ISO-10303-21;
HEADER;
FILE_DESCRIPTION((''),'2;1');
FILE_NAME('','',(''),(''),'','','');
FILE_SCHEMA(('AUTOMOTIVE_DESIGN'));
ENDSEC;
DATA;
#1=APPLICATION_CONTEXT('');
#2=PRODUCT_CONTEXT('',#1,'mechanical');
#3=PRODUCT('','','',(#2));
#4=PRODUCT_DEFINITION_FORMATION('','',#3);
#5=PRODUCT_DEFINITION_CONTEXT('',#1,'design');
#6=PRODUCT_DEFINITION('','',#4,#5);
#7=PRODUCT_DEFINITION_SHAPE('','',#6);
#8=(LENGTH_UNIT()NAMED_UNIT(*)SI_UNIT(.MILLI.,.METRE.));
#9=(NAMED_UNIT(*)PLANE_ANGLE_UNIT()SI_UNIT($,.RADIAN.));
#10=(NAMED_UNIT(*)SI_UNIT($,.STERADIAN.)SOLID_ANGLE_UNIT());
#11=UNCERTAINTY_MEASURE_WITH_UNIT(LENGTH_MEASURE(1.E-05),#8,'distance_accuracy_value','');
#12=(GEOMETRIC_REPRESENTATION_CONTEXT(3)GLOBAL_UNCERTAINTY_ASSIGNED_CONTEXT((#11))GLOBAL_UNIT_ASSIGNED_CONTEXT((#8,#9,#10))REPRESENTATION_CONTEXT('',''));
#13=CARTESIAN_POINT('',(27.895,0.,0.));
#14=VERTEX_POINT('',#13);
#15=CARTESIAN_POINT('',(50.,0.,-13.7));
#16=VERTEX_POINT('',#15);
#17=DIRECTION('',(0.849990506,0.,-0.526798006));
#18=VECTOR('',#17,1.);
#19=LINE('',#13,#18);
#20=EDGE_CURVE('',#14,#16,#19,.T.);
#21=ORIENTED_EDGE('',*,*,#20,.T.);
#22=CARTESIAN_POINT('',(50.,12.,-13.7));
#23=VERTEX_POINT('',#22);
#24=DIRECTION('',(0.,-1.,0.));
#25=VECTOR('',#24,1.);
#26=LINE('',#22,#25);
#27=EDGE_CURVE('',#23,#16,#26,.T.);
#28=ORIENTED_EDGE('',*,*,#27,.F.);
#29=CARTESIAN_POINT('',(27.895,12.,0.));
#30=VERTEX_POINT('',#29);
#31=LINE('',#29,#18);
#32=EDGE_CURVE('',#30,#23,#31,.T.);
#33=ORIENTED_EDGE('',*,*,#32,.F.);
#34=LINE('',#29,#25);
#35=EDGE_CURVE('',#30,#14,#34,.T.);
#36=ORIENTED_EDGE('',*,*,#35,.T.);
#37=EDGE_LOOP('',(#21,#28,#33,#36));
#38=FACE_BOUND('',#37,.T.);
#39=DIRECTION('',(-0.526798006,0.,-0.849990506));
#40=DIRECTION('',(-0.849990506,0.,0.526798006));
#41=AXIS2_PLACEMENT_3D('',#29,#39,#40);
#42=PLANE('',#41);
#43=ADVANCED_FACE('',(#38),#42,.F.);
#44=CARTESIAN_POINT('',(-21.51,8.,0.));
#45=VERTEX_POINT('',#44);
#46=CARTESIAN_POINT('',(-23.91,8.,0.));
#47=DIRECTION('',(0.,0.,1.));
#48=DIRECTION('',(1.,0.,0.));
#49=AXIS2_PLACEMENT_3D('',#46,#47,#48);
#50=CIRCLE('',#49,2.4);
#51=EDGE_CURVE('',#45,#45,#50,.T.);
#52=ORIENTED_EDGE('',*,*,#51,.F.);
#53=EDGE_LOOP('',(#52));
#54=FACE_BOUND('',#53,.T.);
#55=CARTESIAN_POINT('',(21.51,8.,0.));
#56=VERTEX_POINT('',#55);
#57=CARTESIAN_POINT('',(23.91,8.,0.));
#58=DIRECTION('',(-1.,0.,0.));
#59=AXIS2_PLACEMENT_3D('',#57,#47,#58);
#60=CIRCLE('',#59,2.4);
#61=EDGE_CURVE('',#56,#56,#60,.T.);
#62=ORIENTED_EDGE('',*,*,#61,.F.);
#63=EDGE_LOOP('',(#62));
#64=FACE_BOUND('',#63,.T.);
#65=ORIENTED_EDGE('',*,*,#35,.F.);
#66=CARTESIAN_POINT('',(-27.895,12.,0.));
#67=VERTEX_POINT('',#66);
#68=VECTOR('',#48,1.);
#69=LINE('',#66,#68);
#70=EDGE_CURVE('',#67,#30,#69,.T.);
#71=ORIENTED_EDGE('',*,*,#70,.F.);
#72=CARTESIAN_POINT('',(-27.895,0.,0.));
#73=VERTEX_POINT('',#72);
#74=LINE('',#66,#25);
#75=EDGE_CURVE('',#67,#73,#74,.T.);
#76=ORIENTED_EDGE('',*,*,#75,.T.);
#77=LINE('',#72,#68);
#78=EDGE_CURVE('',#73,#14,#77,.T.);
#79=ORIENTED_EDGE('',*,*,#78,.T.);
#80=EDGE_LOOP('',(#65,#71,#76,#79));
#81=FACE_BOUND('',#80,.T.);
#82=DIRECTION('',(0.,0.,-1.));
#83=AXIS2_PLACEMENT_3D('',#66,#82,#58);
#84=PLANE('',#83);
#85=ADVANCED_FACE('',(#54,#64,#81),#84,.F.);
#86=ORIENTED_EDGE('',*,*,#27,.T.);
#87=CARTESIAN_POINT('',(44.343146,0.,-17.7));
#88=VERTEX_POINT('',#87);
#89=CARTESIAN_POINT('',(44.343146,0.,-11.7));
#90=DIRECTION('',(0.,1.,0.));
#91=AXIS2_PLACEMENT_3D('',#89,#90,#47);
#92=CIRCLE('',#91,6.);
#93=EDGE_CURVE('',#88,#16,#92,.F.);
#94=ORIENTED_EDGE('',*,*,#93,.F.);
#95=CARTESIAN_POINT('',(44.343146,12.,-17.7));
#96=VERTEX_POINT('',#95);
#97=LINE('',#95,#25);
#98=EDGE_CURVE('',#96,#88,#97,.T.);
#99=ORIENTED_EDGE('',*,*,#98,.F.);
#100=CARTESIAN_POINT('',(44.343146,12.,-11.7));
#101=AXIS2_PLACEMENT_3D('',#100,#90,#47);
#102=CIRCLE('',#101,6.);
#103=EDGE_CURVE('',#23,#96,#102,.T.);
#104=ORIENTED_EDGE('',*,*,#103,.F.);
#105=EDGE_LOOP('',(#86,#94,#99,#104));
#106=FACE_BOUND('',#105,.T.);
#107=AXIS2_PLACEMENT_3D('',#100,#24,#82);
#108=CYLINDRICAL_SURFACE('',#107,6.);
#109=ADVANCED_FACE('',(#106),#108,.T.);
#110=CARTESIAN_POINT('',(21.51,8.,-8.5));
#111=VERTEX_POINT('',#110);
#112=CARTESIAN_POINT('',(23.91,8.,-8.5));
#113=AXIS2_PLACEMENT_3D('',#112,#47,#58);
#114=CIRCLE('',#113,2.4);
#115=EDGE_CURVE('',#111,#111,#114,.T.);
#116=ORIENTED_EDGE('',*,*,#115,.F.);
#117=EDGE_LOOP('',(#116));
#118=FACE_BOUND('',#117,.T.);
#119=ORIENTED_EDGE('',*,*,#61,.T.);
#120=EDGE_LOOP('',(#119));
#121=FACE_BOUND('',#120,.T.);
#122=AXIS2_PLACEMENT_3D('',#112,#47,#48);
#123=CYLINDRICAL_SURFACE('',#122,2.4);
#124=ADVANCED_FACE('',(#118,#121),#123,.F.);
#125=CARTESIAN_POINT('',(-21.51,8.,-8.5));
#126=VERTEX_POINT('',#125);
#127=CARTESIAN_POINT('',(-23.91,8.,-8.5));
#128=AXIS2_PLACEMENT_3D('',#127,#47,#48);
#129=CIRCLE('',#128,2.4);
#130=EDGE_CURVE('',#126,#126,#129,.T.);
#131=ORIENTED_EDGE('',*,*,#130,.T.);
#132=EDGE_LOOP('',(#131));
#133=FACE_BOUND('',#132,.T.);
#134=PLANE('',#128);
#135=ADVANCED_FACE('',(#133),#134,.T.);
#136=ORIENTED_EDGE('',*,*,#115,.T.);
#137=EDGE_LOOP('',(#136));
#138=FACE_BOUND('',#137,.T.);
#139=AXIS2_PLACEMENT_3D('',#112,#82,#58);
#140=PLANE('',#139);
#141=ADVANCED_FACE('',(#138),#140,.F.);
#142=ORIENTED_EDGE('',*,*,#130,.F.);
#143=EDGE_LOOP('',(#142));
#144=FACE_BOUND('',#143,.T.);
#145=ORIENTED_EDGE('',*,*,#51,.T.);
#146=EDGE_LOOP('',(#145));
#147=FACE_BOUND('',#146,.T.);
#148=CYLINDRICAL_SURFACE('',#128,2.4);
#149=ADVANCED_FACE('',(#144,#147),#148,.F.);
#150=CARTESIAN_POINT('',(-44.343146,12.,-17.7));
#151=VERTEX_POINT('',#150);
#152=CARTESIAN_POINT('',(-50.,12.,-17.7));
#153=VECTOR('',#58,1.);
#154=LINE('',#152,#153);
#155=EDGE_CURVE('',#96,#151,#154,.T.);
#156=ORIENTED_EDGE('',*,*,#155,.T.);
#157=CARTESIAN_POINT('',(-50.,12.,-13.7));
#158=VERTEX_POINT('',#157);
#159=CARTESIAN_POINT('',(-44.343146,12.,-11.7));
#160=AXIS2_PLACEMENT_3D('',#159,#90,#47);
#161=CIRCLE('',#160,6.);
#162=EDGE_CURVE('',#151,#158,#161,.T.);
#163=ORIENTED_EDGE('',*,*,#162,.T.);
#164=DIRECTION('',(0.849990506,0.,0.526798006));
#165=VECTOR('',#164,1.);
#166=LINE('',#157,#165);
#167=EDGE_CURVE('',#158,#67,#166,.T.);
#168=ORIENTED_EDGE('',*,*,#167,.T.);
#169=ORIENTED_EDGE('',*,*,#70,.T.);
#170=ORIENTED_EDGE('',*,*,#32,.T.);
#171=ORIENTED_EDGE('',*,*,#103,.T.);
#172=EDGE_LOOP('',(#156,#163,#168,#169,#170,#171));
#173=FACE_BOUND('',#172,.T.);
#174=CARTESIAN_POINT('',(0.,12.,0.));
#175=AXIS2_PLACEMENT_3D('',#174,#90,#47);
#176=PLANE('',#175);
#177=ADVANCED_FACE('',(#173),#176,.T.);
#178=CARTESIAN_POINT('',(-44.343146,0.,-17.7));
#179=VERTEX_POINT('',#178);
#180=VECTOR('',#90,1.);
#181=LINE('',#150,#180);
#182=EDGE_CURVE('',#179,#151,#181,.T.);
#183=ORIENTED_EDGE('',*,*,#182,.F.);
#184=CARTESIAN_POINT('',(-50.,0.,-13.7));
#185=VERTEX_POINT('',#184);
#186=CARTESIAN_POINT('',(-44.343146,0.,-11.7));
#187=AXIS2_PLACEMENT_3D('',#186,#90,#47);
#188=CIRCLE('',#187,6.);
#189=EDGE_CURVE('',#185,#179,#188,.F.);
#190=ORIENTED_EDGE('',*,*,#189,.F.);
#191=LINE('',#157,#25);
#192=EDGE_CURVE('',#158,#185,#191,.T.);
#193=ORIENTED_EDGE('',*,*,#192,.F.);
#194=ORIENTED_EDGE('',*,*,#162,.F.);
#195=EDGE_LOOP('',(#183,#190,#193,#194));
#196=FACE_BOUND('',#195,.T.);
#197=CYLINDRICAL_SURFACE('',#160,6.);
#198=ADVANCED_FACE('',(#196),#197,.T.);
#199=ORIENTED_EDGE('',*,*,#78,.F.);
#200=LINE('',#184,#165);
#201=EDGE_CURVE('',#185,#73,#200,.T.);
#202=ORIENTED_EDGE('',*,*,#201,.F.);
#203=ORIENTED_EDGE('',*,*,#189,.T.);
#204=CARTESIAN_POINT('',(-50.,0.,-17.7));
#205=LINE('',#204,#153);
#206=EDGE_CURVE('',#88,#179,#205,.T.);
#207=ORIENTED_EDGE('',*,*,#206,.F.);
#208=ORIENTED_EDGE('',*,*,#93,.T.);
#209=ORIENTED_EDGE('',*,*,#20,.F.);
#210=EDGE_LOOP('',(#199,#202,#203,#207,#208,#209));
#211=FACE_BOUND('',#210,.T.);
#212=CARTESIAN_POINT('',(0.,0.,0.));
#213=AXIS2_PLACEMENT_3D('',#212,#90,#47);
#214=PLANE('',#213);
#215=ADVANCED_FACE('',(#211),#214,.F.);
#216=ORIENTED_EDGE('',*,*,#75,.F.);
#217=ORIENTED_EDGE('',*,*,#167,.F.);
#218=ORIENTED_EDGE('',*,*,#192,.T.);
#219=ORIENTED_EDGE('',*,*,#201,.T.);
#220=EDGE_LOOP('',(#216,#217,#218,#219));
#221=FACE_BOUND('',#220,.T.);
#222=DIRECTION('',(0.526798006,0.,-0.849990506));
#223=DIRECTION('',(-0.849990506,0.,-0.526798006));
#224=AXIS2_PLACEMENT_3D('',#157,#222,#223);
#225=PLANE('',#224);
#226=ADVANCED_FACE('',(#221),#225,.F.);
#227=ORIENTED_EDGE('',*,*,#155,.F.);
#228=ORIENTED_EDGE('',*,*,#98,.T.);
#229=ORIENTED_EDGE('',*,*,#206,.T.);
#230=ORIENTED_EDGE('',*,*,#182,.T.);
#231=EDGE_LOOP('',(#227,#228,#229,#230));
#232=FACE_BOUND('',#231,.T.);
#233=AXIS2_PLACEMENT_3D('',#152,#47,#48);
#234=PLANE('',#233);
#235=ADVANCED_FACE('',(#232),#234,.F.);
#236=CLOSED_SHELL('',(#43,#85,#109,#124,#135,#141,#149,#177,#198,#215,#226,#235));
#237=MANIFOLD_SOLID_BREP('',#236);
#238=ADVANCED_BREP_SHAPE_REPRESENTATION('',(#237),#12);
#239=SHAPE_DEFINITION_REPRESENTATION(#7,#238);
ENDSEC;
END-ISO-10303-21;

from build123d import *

# Parameters (mm, degrees)
BOSS_EXTRUDE1_DEPTH = 12
SKETCH3_R           = 2.4
CUT_EXTRUDE1_DEPTH  = 8.5
FILLET1_R           = 6


with BuildPart() as part:
    # Sketch1 → Boss-Extrude1 (new body)
    with BuildSketch(Plane(origin=(0, 0, 0), x_dir=(1, 0, 0), z_dir=(0, 1, 0))):
        Polygon((-50, 17.7), (50, 17.7), (50, 13.7), (27.895, 0), (-27.895, 0), (-50, 13.7), align=None)
    extrude(amount=BOSS_EXTRUDE1_DEPTH)

    # Sketch3 → Cut-Extrude1 (cut)
    with BuildSketch(Plane.XY):
        with Locations((-23.91, 8)):
            Circle(SKETCH3_R)
        with Locations(Location((23.91, 8, 0), (0, 0, 180))):
            Circle(SKETCH3_R)
    extrude(amount=-CUT_EXTRUDE1_DEPTH, mode=Mode.SUBTRACT)

    # Fillet1
    # the kernel refuses this fillet: 6 mm, written as the material it takes off along each edge
    with BuildSketch(Plane(origin=(50, -14.142135624, -17.7), x_dir=(-1, 0, 0), z_dir=(0, 1, 0))) as fillet1_piece_1:
        with BuildLine():
            CenterArc((5.656854249, 6), FILLET1_R, 199.471220634, 70.528779366)
            Line((0, 4), (-0.113137085, 3.96))
            ThreePointArc((-0.113137085, 3.96), (-0.12, 2), (-0.12, 0))
            Line((-0.12, 0), (0, -0.12))
            Line((0, -0.12), (5.656854249, -0.12))
            Line((5.656854249, -0.12), (5.656854249, 0))
        make_face()
    extrude(amount=40.284271247, mode=Mode.SUBTRACT)
    with BuildSketch(Plane(origin=(-50, -14.142135624, -17.7), x_dir=(1, 0, 0), z_dir=(0, 1, 0))) as fillet1_piece_2:
        with BuildLine():
            CenterArc((5.656854249, -6), FILLET1_R, 90, 70.528779366)
            Line((0, -4), (-0.113137085, -3.96))
            ThreePointArc((-0.113137085, -3.96), (-0.12, -2), (-0.12, 0))
            Line((-0.12, 0), (0, 0.12))
            Line((0, 0.12), (5.656854249, 0.12))
            Line((5.656854249, 0.12), (5.656854249, 0))
        make_face()
    extrude(amount=40.284271247, mode=Mode.SUBTRACT)


solid = part.part
